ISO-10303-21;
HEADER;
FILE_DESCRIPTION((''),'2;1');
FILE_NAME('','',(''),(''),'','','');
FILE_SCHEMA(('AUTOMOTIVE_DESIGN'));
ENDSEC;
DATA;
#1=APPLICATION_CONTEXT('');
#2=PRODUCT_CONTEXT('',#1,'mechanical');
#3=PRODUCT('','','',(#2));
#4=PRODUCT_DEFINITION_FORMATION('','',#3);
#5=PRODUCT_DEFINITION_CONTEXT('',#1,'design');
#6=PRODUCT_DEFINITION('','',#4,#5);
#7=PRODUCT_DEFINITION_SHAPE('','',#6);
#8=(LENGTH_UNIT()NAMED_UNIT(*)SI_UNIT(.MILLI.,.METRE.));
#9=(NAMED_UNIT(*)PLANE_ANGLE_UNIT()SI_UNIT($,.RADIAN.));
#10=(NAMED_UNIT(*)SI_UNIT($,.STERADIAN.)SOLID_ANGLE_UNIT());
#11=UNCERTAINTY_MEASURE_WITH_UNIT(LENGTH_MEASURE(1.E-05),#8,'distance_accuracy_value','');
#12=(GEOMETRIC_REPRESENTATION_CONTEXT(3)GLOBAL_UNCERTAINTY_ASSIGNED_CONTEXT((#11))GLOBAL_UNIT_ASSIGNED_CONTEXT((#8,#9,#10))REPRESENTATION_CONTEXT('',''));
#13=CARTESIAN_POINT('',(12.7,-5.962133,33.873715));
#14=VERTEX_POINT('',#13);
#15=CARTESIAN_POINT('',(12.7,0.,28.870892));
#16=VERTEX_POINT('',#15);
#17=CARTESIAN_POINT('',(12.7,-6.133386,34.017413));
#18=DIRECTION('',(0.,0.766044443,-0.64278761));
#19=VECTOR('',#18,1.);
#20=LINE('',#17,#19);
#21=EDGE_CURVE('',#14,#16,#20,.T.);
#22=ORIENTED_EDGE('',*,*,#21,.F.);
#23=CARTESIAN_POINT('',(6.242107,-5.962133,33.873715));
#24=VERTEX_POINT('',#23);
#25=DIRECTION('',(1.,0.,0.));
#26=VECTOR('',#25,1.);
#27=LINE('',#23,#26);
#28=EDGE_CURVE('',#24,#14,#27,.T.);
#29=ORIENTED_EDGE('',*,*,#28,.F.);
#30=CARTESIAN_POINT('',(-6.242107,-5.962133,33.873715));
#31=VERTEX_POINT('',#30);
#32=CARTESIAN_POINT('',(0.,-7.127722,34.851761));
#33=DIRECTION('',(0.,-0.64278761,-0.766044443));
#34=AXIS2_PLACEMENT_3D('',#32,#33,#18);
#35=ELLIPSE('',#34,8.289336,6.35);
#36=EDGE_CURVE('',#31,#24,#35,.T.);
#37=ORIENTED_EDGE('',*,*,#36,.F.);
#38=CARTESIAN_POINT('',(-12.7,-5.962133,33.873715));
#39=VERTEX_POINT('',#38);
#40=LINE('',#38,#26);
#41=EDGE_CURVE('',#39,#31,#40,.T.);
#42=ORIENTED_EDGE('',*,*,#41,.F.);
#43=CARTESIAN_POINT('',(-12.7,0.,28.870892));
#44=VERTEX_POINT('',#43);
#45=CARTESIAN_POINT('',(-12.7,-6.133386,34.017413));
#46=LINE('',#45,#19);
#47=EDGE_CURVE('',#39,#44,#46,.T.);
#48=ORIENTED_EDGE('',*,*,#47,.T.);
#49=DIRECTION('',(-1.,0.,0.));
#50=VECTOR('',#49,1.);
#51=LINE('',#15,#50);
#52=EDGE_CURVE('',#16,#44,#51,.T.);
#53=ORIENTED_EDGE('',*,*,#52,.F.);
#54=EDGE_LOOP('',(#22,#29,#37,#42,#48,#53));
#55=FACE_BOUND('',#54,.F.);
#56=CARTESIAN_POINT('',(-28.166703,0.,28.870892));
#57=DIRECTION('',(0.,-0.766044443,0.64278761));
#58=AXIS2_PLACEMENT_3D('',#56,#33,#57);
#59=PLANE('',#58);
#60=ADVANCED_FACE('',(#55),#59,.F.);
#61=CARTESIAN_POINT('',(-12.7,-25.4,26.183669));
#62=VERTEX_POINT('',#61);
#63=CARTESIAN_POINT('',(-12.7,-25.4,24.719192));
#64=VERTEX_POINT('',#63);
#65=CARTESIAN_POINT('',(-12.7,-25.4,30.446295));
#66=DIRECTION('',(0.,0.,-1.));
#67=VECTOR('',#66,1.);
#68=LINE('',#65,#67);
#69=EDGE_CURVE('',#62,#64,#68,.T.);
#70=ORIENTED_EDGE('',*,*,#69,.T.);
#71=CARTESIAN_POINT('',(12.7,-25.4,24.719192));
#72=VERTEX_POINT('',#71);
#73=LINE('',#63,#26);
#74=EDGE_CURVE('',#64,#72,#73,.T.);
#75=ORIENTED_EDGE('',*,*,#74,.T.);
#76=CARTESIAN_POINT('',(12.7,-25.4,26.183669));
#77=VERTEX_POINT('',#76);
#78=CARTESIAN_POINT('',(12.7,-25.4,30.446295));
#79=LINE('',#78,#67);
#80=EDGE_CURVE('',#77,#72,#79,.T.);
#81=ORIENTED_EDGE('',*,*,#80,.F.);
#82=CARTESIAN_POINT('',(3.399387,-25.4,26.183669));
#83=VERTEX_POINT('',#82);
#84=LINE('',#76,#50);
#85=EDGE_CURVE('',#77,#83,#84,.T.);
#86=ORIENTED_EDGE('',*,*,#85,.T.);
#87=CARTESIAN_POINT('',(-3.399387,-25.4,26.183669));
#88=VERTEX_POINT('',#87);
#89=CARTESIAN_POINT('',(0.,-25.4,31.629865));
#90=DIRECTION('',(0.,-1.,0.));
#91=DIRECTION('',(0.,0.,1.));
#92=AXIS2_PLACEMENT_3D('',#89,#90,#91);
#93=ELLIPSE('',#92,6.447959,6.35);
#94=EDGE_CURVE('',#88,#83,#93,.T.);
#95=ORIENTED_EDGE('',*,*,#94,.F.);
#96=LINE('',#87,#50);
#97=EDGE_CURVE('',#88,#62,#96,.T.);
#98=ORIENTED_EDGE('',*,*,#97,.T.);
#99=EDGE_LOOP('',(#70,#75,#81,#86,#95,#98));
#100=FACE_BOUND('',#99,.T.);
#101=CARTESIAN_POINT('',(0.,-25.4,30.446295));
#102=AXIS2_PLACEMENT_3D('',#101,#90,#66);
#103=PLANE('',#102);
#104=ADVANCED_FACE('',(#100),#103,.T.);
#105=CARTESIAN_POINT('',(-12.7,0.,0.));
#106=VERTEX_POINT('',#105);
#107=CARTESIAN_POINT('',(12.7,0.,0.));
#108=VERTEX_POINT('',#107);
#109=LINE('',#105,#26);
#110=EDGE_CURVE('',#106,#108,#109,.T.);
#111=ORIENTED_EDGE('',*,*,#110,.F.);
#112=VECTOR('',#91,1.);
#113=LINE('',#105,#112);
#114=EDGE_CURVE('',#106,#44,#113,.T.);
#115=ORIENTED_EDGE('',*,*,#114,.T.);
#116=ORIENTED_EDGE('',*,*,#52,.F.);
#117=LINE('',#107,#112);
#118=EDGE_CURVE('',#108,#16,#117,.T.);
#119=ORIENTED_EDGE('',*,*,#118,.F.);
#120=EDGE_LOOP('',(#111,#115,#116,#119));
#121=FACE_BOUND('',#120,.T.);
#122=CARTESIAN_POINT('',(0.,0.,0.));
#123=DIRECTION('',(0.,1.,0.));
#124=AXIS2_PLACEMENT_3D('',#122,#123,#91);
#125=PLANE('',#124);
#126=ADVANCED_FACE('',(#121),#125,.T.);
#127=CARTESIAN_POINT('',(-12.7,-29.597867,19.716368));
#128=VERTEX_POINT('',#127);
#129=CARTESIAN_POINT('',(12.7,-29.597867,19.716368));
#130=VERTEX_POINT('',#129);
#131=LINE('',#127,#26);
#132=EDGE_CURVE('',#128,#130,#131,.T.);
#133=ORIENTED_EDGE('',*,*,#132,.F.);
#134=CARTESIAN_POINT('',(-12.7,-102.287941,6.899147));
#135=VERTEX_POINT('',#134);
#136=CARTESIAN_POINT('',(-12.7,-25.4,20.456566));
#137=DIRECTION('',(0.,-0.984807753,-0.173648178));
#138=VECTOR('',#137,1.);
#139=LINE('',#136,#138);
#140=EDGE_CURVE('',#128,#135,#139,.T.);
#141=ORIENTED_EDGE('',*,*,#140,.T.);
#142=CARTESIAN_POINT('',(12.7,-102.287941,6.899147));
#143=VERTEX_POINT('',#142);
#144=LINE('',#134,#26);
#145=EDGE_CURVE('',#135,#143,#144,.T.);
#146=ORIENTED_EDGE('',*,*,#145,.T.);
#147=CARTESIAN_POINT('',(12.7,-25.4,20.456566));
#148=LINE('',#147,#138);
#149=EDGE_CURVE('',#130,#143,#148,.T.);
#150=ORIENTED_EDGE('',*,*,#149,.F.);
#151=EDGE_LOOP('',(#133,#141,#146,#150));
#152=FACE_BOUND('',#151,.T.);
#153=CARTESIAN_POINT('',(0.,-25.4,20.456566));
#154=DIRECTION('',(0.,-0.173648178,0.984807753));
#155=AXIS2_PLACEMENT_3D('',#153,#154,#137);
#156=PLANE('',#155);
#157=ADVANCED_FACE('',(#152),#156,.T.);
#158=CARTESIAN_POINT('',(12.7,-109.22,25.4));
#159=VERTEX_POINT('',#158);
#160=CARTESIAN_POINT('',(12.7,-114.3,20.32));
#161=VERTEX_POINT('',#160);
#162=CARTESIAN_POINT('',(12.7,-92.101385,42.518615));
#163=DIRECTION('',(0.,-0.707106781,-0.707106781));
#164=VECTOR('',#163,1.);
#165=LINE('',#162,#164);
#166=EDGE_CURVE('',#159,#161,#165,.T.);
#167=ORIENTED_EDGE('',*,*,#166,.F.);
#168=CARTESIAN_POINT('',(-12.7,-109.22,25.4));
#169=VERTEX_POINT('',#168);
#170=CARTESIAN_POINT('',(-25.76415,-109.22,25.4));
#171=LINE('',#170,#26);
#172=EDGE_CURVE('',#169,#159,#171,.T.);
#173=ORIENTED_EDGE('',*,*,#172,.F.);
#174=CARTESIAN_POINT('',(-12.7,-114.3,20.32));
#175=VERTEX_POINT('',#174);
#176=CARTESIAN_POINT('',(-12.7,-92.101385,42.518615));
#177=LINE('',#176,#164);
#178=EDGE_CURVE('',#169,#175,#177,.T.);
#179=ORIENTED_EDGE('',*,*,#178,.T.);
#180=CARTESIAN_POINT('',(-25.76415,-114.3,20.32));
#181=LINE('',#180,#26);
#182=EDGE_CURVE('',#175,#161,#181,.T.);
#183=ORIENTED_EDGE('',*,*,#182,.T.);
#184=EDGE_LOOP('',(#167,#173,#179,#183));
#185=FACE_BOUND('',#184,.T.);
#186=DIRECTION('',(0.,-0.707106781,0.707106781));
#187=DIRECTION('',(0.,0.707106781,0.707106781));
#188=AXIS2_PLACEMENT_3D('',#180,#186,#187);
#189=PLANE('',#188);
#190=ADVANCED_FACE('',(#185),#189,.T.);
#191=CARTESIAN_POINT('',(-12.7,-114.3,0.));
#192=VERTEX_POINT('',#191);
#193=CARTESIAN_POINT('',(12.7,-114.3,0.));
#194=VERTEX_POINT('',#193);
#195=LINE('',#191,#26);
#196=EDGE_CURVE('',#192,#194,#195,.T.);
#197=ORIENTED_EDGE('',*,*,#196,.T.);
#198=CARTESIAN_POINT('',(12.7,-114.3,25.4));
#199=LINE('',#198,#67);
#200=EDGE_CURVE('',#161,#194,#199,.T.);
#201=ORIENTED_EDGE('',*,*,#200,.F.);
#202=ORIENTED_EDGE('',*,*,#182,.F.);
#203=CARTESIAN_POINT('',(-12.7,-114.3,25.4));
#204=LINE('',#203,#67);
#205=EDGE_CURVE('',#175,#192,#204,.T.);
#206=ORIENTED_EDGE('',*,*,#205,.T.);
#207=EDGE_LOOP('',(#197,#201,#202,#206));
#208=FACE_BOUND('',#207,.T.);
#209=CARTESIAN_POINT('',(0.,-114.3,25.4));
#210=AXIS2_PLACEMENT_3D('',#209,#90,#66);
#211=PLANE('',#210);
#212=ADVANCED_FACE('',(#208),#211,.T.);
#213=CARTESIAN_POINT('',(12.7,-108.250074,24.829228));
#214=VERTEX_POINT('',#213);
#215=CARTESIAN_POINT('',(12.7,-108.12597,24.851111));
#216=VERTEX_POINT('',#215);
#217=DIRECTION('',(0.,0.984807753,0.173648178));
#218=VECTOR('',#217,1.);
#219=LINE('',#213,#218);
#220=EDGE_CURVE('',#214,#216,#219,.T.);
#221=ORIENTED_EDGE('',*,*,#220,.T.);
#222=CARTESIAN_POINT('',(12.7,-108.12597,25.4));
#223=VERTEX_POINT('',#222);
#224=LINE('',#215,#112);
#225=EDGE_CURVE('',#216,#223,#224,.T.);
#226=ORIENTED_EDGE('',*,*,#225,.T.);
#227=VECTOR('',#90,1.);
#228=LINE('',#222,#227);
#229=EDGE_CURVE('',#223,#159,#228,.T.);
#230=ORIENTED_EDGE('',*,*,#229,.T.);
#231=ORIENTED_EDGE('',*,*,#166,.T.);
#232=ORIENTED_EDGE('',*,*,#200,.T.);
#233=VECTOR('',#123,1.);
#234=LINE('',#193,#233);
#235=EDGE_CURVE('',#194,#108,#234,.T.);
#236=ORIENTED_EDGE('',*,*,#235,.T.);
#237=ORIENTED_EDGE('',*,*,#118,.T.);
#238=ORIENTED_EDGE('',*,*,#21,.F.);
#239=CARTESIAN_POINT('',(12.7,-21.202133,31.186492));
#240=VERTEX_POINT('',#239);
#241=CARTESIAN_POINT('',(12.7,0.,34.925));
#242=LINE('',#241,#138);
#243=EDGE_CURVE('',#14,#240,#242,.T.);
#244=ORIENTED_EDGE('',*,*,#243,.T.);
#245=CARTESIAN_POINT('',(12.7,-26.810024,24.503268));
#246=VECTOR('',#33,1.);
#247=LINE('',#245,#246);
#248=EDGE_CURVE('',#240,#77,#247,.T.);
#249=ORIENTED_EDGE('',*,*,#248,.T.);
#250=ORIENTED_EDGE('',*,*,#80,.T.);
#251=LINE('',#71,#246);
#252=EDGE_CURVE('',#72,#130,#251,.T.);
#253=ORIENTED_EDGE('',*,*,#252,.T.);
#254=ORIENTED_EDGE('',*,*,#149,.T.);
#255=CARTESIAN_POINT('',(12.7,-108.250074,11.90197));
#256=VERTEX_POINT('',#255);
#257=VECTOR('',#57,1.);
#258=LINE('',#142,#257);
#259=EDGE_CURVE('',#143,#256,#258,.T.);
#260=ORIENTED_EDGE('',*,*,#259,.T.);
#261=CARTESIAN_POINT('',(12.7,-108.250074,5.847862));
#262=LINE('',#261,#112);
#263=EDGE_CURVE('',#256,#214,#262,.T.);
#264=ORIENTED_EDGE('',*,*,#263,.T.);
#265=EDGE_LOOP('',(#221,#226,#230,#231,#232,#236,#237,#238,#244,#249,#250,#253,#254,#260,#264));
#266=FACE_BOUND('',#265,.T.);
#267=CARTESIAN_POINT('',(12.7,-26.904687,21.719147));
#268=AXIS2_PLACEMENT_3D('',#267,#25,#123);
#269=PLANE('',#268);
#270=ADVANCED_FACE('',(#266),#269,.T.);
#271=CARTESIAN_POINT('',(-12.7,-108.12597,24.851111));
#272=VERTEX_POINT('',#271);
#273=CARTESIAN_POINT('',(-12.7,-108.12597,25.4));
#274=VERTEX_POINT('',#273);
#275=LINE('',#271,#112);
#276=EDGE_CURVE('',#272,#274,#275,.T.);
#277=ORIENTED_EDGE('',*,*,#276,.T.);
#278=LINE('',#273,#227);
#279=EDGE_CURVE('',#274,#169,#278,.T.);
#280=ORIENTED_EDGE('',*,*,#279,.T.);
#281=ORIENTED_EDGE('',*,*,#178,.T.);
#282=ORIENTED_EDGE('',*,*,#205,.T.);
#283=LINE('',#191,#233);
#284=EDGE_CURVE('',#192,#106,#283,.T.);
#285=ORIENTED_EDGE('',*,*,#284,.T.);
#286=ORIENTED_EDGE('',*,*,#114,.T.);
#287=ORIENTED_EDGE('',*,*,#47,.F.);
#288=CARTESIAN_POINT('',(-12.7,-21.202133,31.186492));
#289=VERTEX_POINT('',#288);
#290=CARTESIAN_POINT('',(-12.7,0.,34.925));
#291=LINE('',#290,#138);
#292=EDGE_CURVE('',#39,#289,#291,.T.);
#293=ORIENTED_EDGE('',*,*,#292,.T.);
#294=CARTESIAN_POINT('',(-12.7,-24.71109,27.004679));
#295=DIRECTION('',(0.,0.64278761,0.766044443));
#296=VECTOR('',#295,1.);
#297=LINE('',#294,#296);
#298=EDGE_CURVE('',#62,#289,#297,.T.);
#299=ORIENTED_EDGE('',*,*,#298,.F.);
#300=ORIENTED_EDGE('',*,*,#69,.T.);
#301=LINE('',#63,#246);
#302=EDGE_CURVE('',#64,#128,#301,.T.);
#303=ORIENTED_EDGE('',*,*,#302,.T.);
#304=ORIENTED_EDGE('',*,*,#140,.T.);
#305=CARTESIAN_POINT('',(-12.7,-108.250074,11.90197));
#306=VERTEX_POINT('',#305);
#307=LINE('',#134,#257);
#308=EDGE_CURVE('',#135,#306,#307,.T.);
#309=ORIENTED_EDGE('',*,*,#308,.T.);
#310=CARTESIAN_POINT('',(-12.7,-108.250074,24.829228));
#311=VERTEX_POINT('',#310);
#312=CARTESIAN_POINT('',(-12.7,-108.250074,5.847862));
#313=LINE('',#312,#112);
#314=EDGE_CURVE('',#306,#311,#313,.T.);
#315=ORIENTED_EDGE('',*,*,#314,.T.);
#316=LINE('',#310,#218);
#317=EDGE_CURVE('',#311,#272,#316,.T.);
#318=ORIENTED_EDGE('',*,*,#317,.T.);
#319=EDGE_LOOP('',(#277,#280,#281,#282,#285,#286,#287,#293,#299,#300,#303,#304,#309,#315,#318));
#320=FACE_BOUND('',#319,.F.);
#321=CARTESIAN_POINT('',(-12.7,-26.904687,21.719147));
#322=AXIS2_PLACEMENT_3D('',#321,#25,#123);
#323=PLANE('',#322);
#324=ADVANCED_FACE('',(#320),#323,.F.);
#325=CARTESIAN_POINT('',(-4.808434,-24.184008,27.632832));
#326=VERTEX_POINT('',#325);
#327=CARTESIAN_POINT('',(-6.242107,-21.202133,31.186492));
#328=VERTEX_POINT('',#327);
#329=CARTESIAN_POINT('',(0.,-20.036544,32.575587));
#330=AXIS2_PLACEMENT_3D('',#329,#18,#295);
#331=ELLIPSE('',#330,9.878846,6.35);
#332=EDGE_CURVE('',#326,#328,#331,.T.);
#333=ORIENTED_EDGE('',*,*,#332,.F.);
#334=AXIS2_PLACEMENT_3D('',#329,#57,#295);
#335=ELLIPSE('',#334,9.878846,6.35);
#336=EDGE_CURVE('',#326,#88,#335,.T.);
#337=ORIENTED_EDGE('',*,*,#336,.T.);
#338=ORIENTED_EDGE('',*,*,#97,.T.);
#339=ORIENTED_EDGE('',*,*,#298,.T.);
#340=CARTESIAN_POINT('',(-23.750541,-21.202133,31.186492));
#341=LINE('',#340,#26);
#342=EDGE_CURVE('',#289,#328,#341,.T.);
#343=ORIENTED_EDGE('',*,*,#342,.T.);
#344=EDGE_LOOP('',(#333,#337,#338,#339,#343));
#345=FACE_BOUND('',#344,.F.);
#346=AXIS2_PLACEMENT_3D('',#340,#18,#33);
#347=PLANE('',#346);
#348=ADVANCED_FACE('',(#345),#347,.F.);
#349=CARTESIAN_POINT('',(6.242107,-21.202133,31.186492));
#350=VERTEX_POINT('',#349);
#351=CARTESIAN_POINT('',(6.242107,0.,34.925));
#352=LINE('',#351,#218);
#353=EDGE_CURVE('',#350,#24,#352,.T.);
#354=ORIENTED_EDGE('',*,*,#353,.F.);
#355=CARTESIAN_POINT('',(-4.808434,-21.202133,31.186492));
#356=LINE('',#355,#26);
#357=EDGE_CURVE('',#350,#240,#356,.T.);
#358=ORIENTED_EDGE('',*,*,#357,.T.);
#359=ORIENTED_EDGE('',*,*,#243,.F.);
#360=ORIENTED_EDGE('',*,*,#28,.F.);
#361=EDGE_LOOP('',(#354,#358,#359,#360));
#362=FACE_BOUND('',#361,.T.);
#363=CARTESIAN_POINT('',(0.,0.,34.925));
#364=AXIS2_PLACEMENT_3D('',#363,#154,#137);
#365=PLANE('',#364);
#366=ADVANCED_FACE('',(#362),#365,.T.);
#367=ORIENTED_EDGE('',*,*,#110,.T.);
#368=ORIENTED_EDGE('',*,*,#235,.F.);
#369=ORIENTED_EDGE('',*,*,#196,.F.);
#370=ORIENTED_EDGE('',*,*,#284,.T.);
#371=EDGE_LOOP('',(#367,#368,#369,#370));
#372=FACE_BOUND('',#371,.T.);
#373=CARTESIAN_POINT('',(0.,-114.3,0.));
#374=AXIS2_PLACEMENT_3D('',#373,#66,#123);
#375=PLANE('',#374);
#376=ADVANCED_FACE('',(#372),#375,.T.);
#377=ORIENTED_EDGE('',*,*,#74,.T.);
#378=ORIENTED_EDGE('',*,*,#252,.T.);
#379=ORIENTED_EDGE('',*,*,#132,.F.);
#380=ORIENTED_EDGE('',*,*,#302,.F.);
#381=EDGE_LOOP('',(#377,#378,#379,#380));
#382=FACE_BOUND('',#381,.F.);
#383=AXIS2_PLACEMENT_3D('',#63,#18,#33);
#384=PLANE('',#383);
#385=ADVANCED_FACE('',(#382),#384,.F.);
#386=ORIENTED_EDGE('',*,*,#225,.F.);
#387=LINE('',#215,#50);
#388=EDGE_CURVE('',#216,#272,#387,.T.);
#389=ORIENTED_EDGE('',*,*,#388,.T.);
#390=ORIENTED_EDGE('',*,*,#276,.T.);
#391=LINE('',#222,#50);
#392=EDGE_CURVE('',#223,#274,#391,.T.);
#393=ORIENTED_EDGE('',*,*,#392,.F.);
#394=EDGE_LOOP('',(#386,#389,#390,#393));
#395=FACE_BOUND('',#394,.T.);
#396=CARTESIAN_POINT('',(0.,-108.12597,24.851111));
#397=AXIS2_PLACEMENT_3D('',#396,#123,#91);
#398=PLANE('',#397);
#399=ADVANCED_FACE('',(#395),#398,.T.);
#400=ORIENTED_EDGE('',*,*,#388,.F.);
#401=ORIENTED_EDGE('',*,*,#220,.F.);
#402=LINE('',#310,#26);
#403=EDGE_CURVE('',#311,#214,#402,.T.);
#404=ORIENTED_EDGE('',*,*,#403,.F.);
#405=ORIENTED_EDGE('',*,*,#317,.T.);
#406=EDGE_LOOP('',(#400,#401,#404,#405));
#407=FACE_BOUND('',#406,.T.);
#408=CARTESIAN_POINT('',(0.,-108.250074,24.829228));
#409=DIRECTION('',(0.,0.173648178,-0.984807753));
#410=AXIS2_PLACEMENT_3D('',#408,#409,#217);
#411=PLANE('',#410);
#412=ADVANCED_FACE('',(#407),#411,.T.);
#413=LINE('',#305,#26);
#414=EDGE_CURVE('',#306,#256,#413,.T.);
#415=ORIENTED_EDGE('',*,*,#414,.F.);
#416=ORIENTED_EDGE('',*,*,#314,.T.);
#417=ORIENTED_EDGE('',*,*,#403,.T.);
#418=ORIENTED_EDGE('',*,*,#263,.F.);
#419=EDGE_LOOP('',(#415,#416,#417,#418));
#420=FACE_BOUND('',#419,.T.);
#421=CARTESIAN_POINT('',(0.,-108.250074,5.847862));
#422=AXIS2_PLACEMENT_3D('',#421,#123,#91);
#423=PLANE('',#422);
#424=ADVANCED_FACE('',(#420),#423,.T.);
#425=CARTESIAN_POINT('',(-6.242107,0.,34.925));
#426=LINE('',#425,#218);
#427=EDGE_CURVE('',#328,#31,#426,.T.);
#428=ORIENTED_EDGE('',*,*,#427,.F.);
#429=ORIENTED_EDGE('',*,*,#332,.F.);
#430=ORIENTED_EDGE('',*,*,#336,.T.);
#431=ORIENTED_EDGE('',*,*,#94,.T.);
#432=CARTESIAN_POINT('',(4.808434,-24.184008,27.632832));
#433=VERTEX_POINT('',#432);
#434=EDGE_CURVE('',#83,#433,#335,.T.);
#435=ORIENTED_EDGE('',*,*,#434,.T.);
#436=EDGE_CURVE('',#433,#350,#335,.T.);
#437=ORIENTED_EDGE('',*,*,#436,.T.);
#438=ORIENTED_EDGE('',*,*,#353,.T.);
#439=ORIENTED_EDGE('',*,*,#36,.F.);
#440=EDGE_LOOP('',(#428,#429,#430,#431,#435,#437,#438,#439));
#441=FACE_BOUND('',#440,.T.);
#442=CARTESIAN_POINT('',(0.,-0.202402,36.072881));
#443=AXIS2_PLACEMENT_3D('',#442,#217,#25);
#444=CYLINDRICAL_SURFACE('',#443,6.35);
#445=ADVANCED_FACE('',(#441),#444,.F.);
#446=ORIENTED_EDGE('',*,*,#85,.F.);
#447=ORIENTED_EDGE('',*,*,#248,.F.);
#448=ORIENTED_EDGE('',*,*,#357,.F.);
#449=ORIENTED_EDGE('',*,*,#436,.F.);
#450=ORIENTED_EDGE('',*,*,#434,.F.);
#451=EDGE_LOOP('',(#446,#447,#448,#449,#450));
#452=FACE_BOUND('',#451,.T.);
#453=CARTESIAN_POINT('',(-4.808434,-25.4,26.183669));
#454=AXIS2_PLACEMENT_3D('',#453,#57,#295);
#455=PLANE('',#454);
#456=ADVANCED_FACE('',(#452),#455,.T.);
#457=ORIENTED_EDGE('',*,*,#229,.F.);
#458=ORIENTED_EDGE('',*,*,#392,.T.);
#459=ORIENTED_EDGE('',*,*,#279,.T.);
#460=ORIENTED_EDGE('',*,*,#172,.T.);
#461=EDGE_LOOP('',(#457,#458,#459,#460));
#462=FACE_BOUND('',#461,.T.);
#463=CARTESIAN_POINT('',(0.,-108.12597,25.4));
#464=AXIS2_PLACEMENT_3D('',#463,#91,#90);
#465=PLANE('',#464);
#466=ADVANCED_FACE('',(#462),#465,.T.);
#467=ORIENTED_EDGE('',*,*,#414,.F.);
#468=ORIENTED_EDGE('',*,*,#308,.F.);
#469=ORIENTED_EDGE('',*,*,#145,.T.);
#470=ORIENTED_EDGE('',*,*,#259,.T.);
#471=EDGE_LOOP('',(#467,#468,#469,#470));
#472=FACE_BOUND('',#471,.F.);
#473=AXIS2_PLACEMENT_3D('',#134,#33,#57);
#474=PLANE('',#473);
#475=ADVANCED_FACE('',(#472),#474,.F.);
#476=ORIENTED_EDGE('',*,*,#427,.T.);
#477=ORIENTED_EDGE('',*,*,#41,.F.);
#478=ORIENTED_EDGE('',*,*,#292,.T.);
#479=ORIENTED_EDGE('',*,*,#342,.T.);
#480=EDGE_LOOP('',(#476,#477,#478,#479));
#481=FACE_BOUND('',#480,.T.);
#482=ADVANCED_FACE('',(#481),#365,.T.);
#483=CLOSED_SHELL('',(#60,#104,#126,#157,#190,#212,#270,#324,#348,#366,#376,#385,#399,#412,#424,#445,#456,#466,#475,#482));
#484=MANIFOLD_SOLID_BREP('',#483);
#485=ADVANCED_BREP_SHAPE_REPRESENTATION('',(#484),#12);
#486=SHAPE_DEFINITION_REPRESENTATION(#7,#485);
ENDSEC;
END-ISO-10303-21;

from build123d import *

# Parameters (mm, degrees)
F1_DEPTH     = 12.7
F3_R         = 6.35
F4_DEPTH     = 104.14
F5_T1_DEPTH  = 25.4
F5_T3_DEPTH  = 51.5282991577
F5_T5_DEPTH  = 37.3912990947
F5_T7_DEPTH  = 28.55897566
F5_T9_DEPTH  = 28.55897566
F5_T11_DEPTH = 37.3912990947


# Not quite as in the source:
# - a fillet or chamfer that OpenCascade refuses, or shapes differently, is made with other operations: its cross-section is extruded or revolved along the edge and cut away or added


with BuildPart() as f1:
    # F0 (on Right) → F1 (new body, symmetric)
    with BuildSketch(Plane.YZ):
        Polygon((-114.3, 25.4), (-114.3, 0), (0, 0), (0, 34.925), (-25.4, 30.44629469), (-25.4, 20.4565655141), (-108.2500742316, 5.8478620733), (-108.2500742316, 24.8292279061), (-108.1259697676, 24.8511108716), (-108.1259697676, 25.4), align=None)
    extrude(amount=F1_DEPTH, both=True)

    # F3 (on face) → F4 (cut)
    with BuildSketch(Plane(origin=(0, 5.9725267528, 1.0531176095), x_dir=(1, 0, 0), z_dir=(0, -0.984807753, -0.1736481777))):
        with Locations((0, 35.56)):
            Circle(F3_R)
    extrude(amount=F4_DEPTH, mode=Mode.SUBTRACT)

    # F5: chamfer of 5.08 on 7 edges, made by hand

    # F5_s2 → F5_t1 (join)
    with BuildSketch(Plane.YZ.offset(-12.7)):
        Polygon((-25.4, 24.7191916404), (-29.5978672575, 19.7163682551), (-25.4, 20.4565655141), align=None)
        Polygon((-102.2879414891, 6.8991469384), (-108.2500742316, 11.9019703237), (-108.2500742316, 5.8478620733), align=None)
    extrude(amount=F5_T1_DEPTH)

    # F5_s4 → F5_t3 (cut)
    with BuildSketch(Plane.YZ.offset(-25.7641495789)):
        Polygon((-114.3, 20.32), (-109.22, 25.4), (-114.3, 25.4), align=None)
    extrude(amount=F5_T3_DEPTH, mode=Mode.SUBTRACT)

    # F5_s6 → F5_t5 (cut)
    with BuildSketch(Plane.YZ.offset(-28.1667031257)):
        Polygon((0, 28.8708917496), (-5.9621327425, 33.8737151349), (0, 34.925), align=None)
    extrude(amount=F5_T5_DEPTH, mode=Mode.SUBTRACT)

    # F5_s8 → F5_t7 (cut)
    with BuildSketch(Plane.YZ.offset(-4.8084342517)):
        Polygon((-25.4, 26.1836685636), (-21.2021327425, 31.1864919489), (-25.4, 30.44629469), align=None)
    extrude(amount=F5_T7_DEPTH, mode=Mode.SUBTRACT)

    # F5_s10 → F5_t9 (cut)
    with BuildSketch(Plane.YZ.offset(-23.7505414084)):
        Polygon((-21.2021327425, 31.1864919489), (-25.4, 26.1836685636), (-25.4, 30.44629469), align=None)
    extrude(amount=F5_T9_DEPTH, mode=Mode.SUBTRACT)

    # F5_s12 → F5_t11 (cut)
    with BuildSketch(Plane.YZ.offset(-9.224595969)):
        Polygon((0, 28.8708917496), (-5.9621327425, 33.8737151349), (0, 34.925), align=None)
    extrude(amount=F5_T11_DEPTH, mode=Mode.SUBTRACT)


solid = f1.part
